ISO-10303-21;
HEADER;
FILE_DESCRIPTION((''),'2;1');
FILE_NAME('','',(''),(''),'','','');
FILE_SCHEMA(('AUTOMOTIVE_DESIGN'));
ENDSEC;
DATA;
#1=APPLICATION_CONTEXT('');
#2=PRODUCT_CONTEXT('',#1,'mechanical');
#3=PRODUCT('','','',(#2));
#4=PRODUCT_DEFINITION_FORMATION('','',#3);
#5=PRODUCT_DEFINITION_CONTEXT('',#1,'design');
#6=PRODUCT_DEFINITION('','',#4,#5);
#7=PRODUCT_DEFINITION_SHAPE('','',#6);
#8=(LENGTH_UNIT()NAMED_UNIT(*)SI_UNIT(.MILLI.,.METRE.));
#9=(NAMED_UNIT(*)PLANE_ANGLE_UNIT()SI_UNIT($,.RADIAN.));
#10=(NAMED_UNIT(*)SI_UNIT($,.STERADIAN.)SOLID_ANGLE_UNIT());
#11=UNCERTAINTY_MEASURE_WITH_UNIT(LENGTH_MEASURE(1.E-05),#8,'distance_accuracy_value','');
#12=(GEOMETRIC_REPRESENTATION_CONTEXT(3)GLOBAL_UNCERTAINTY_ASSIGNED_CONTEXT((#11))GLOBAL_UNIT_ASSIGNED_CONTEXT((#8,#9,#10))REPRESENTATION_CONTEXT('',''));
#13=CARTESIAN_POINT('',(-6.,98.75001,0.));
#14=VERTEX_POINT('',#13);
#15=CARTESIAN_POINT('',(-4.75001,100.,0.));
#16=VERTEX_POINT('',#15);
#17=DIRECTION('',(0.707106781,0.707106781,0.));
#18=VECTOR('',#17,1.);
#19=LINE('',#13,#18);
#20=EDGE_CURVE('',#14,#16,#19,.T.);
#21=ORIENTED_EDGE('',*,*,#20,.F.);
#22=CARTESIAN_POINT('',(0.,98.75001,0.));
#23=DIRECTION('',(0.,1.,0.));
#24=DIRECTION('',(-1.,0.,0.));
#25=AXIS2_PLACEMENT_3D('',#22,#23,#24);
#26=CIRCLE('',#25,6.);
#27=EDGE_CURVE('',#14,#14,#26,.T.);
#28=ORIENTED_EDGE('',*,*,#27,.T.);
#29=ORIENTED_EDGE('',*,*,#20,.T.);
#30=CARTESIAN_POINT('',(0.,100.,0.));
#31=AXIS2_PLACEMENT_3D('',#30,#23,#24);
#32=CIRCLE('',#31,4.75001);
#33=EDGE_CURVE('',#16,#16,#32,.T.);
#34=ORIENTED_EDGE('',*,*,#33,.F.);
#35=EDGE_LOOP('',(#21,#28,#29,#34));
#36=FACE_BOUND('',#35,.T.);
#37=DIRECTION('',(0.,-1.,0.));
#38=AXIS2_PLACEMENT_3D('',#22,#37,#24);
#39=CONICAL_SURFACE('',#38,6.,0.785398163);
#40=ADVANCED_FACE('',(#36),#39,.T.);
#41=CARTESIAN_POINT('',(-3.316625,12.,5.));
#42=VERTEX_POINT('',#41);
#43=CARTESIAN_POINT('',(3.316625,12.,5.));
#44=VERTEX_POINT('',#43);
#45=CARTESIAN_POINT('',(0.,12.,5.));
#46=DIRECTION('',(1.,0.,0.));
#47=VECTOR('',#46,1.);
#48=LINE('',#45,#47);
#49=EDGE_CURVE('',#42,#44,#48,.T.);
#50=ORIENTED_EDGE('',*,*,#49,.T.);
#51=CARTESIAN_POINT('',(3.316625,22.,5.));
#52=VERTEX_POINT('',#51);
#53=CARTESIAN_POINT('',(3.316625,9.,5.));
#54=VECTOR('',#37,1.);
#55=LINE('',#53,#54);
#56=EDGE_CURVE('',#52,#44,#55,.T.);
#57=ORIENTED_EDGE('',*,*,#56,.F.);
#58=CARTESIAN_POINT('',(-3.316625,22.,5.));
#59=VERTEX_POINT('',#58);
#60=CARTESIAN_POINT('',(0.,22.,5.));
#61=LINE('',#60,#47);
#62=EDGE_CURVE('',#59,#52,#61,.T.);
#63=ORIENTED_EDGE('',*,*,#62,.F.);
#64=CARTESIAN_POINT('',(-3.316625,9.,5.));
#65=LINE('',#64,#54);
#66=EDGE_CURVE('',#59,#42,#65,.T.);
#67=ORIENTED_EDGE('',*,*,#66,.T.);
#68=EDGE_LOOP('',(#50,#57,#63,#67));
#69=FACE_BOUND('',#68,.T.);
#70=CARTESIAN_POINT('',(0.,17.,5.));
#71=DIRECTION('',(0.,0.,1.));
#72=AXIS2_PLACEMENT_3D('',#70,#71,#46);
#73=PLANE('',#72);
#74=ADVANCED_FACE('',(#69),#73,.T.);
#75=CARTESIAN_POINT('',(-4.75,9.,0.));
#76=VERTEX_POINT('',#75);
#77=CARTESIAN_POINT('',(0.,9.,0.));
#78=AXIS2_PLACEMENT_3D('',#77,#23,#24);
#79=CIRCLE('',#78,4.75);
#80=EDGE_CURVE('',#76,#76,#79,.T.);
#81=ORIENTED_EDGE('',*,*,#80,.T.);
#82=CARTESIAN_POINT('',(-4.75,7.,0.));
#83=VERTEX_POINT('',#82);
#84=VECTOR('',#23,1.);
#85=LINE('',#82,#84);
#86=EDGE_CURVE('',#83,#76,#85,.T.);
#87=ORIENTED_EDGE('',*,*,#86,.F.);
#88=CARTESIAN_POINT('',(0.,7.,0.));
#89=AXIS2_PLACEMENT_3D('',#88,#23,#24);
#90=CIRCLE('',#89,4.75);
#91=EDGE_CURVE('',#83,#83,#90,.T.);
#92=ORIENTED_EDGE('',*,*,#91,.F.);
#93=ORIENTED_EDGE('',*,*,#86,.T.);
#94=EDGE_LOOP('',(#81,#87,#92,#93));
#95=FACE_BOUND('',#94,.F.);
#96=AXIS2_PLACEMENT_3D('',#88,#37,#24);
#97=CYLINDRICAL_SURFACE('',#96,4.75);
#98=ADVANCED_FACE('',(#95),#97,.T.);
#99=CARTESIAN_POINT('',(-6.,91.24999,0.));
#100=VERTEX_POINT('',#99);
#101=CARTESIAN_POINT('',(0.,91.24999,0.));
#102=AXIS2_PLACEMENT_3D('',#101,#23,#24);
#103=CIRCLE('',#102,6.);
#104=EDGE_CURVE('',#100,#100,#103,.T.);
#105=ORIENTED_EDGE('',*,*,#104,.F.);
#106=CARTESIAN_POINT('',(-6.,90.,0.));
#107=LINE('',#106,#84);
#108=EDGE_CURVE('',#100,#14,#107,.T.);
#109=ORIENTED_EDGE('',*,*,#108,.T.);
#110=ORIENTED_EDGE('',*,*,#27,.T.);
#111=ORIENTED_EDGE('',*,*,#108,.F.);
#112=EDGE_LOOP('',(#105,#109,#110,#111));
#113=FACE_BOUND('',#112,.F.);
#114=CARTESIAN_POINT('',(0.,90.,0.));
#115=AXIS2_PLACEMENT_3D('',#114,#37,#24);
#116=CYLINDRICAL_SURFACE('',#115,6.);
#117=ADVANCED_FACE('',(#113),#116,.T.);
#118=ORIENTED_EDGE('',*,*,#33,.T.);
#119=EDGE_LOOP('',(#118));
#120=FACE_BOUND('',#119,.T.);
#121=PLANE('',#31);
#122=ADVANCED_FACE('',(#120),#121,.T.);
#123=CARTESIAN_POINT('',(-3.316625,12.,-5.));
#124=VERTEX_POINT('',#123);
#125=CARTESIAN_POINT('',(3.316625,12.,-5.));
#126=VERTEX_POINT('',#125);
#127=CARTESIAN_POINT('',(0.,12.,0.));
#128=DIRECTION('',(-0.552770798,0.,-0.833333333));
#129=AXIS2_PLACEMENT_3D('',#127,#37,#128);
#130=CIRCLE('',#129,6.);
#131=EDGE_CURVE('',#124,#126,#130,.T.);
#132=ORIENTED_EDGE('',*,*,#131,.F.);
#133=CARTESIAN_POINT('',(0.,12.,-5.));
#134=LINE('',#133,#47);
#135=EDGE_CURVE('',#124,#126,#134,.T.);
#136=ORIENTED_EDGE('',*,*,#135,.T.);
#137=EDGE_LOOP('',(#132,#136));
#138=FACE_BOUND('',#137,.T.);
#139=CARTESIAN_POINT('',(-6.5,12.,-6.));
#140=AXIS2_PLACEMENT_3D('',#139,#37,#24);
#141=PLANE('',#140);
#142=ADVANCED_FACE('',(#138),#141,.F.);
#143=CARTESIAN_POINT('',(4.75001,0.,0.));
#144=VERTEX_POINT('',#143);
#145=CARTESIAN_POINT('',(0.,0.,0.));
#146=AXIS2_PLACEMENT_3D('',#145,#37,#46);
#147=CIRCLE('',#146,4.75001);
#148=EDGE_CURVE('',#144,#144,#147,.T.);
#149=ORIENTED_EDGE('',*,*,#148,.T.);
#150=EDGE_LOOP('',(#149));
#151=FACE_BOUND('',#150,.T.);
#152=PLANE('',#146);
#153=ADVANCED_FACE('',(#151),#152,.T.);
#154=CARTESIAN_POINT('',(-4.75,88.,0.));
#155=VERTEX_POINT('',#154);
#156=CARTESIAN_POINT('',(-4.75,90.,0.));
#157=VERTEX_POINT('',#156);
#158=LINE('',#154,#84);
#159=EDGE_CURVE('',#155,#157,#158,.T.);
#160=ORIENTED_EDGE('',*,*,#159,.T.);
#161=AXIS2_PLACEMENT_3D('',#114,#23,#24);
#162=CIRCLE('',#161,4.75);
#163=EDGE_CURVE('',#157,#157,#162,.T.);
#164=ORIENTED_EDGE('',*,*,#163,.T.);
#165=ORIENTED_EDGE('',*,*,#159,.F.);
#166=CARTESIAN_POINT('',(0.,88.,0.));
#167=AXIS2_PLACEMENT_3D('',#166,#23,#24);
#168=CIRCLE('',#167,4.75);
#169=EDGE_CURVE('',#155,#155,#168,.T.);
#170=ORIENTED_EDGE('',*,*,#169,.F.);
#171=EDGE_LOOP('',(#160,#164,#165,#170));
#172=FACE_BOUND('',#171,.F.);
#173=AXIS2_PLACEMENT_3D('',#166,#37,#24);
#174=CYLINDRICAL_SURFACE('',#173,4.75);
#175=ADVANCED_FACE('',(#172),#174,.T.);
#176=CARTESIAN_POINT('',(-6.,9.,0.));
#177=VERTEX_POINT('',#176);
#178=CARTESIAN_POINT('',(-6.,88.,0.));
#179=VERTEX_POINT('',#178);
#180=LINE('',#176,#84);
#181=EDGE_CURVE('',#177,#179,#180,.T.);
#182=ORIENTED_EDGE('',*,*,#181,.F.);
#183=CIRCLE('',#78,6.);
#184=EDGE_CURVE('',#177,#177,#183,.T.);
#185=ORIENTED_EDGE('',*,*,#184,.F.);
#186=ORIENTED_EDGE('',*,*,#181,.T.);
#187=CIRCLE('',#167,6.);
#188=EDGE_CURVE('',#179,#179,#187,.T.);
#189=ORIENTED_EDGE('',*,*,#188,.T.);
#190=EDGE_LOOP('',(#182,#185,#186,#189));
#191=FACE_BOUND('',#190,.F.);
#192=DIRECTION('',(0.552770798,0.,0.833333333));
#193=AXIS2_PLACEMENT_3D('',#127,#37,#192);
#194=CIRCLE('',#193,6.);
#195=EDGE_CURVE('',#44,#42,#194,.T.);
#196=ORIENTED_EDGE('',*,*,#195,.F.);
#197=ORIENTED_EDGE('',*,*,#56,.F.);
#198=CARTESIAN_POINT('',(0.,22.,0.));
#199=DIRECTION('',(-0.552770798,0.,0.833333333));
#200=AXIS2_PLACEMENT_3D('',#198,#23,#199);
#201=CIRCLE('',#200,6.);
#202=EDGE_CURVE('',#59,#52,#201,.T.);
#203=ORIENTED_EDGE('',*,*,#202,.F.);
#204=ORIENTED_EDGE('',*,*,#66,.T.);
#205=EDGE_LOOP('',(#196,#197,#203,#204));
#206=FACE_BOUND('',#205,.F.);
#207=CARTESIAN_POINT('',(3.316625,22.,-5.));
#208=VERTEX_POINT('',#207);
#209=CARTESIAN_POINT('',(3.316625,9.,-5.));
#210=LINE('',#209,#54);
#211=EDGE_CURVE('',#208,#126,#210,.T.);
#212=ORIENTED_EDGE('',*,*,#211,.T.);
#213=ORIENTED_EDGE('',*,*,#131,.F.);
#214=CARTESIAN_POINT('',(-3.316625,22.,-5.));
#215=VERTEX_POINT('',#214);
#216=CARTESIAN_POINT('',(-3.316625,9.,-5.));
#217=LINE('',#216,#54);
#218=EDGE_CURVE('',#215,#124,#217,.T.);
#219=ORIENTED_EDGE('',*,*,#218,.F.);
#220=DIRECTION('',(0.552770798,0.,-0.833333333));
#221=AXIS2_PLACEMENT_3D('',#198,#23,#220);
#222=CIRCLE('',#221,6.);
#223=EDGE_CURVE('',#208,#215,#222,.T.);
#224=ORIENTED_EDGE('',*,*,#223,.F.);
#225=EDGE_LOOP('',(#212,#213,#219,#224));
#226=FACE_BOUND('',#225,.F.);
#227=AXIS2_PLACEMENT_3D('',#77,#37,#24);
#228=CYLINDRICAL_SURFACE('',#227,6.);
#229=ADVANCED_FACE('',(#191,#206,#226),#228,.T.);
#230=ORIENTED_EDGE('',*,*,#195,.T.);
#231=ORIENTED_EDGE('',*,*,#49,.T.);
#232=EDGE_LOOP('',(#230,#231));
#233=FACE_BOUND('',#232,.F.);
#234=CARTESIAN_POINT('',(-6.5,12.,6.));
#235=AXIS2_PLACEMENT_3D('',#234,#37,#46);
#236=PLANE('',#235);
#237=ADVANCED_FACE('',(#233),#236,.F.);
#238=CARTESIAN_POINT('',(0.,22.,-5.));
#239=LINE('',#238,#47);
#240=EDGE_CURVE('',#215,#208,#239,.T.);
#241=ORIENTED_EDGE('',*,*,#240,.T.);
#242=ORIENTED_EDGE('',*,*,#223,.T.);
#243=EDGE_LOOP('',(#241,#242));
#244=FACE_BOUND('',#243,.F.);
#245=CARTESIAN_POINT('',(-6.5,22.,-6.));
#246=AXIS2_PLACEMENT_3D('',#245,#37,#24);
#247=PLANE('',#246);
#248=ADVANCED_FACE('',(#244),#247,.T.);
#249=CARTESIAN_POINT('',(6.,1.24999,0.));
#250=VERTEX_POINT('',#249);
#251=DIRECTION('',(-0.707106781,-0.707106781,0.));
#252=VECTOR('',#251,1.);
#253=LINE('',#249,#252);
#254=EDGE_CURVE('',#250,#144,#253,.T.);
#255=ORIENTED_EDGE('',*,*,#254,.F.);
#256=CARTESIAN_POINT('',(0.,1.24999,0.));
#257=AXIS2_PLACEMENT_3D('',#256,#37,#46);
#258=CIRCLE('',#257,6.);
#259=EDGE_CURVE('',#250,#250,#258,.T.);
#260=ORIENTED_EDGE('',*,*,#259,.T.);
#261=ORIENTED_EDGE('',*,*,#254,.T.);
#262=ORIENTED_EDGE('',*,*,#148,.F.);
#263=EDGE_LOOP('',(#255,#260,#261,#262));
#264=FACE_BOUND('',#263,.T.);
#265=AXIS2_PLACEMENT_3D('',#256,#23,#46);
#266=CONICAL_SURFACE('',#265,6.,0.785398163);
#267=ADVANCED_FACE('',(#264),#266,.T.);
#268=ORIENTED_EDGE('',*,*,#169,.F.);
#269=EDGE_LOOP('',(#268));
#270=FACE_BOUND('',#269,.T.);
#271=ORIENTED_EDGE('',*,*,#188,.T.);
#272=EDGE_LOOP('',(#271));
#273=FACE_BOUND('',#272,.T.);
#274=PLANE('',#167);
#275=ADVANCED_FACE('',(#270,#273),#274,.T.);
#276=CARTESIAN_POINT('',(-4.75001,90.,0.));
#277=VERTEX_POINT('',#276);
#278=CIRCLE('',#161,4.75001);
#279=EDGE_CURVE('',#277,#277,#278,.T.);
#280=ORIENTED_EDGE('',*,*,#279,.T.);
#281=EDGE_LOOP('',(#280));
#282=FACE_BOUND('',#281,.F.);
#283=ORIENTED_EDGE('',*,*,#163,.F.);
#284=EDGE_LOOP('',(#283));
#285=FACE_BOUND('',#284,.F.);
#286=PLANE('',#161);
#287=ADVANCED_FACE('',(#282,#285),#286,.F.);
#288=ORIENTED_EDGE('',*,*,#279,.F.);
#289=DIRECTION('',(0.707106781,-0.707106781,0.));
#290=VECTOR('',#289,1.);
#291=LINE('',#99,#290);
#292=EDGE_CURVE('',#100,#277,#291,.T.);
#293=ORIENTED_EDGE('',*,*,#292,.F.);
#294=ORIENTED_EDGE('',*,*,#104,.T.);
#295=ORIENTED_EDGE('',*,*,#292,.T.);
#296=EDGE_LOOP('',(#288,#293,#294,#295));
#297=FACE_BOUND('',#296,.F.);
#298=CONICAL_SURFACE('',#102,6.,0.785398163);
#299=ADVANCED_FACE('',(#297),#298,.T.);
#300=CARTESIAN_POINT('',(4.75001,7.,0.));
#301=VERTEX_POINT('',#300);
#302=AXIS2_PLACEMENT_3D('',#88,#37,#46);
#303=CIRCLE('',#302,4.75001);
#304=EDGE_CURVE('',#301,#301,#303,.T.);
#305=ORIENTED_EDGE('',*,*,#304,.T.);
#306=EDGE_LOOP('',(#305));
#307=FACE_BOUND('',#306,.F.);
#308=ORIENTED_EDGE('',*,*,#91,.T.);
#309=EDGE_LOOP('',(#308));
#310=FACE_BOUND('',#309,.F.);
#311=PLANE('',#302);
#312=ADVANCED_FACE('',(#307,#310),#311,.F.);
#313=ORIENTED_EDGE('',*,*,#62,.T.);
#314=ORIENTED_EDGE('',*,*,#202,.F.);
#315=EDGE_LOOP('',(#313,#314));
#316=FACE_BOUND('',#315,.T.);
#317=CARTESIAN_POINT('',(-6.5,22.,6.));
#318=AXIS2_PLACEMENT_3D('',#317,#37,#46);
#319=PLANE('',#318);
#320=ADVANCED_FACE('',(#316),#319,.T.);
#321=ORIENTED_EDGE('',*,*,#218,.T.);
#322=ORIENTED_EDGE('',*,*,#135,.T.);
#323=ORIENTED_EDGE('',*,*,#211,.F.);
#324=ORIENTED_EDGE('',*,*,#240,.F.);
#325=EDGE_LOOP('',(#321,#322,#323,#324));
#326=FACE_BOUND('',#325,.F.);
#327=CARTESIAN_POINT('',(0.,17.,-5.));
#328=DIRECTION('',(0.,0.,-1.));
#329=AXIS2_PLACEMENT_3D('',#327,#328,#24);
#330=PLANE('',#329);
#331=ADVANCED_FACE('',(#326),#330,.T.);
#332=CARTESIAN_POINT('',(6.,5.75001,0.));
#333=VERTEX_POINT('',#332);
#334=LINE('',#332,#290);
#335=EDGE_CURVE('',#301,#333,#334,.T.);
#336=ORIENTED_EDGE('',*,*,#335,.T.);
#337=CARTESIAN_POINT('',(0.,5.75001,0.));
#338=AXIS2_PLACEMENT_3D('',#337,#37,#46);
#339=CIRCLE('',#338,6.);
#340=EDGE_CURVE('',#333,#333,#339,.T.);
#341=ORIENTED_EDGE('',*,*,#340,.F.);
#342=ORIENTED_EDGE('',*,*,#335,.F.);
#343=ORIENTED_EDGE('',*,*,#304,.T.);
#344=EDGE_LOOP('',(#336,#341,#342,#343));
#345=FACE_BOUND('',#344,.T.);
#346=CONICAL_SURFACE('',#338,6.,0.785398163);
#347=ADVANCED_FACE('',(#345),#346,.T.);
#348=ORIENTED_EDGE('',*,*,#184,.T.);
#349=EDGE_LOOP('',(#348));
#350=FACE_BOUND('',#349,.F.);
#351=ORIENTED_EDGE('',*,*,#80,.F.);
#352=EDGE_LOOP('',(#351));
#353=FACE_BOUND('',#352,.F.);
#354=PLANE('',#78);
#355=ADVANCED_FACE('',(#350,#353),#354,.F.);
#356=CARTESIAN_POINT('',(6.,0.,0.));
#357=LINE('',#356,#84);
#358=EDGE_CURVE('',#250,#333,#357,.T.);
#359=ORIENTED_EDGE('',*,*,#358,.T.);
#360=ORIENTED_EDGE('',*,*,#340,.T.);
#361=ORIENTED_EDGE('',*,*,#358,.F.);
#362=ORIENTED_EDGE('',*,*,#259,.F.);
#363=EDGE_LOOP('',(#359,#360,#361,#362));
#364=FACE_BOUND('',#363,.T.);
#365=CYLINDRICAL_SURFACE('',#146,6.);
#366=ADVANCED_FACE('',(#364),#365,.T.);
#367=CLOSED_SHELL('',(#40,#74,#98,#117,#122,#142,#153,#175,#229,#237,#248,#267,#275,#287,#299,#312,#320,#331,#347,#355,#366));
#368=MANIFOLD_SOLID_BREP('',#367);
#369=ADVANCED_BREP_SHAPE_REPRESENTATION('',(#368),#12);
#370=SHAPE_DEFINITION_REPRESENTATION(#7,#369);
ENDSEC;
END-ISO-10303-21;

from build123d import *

# Parameters (mm, degrees)
F0_R      = 6
F1_DEPTH  = 7
F2_R      = 4.75
F3_DEPTH  = 2
F4_R      = 6
F5_DEPTH  = 79
F6_R      = 4.75
F7_DEPTH  = 2
F8_R      = 6
F9_DEPTH  = 10
F10_SIZE  = 1.24999
F12_W     = 13
F12_H     = 10
F13_DEPTH = 1


# Not quite as in the source:
# - a fillet or chamfer is up to 0.001 mm smaller than in the source, because OpenCascade refuses the exact size


with BuildPart() as f1:
    # F0 (on Front) → F1 (new body)
    with BuildSketch(Plane.XZ):
        Circle(F0_R)
    extrude(amount=-F1_DEPTH)

    # F2 (on face) → F3 (join)
    with BuildSketch(Plane(origin=(0, 7, 0), x_dir=(-1, 0, 0), z_dir=(0, 1, 0))):
        Circle(F2_R)
    extrude(amount=F3_DEPTH)

    # F4 (on face) → F5 (join)
    with BuildSketch(Plane(origin=(0, 9, 0), x_dir=(-1, 0, 0), z_dir=(0, 1, 0))):
        Circle(F4_R)
    extrude(amount=F5_DEPTH)

    # F6 (on face) → F7 (join)
    with BuildSketch(Plane(origin=(0, 88, 0), x_dir=(-1, 0, 0), z_dir=(0, 1, 0))):
        Circle(F6_R)
    extrude(amount=F7_DEPTH)

    # F8 (on face) → F9 (join)
    with BuildSketch(Plane(origin=(0, 90, 0), x_dir=(-1, 0, 0), z_dir=(0, 1, 0))):
        Circle(F8_R)
    extrude(amount=F9_DEPTH)

    # F10 (size 1.25 in the source; OpenCascade refuses exactly that, so slightly less here)
    f10_edges = [f1.edges().sort_by_distance(p)[0] for p in [
        (6, 3.5, 0),
        (-6, 0, 0),
        (-6, 7, 0),
        (-6, 95, 0),
        (6, 90, 0),
        (6, 100, 0),
    ]]
    chamfer(f10_edges, length=F10_SIZE)

    # F12 (on offset) → F13 (cut)
    with BuildSketch(Plane.XY.offset(6)):
        with Locations((0, 17)):
            Rectangle(F12_W, F12_H)
    f13 = extrude(amount=-F13_DEPTH, mode=Mode.SUBTRACT)

    # F14: F13 across plane
    add(f13.mirror(Plane.XY), mode=Mode.SUBTRACT)


solid = f1.part
